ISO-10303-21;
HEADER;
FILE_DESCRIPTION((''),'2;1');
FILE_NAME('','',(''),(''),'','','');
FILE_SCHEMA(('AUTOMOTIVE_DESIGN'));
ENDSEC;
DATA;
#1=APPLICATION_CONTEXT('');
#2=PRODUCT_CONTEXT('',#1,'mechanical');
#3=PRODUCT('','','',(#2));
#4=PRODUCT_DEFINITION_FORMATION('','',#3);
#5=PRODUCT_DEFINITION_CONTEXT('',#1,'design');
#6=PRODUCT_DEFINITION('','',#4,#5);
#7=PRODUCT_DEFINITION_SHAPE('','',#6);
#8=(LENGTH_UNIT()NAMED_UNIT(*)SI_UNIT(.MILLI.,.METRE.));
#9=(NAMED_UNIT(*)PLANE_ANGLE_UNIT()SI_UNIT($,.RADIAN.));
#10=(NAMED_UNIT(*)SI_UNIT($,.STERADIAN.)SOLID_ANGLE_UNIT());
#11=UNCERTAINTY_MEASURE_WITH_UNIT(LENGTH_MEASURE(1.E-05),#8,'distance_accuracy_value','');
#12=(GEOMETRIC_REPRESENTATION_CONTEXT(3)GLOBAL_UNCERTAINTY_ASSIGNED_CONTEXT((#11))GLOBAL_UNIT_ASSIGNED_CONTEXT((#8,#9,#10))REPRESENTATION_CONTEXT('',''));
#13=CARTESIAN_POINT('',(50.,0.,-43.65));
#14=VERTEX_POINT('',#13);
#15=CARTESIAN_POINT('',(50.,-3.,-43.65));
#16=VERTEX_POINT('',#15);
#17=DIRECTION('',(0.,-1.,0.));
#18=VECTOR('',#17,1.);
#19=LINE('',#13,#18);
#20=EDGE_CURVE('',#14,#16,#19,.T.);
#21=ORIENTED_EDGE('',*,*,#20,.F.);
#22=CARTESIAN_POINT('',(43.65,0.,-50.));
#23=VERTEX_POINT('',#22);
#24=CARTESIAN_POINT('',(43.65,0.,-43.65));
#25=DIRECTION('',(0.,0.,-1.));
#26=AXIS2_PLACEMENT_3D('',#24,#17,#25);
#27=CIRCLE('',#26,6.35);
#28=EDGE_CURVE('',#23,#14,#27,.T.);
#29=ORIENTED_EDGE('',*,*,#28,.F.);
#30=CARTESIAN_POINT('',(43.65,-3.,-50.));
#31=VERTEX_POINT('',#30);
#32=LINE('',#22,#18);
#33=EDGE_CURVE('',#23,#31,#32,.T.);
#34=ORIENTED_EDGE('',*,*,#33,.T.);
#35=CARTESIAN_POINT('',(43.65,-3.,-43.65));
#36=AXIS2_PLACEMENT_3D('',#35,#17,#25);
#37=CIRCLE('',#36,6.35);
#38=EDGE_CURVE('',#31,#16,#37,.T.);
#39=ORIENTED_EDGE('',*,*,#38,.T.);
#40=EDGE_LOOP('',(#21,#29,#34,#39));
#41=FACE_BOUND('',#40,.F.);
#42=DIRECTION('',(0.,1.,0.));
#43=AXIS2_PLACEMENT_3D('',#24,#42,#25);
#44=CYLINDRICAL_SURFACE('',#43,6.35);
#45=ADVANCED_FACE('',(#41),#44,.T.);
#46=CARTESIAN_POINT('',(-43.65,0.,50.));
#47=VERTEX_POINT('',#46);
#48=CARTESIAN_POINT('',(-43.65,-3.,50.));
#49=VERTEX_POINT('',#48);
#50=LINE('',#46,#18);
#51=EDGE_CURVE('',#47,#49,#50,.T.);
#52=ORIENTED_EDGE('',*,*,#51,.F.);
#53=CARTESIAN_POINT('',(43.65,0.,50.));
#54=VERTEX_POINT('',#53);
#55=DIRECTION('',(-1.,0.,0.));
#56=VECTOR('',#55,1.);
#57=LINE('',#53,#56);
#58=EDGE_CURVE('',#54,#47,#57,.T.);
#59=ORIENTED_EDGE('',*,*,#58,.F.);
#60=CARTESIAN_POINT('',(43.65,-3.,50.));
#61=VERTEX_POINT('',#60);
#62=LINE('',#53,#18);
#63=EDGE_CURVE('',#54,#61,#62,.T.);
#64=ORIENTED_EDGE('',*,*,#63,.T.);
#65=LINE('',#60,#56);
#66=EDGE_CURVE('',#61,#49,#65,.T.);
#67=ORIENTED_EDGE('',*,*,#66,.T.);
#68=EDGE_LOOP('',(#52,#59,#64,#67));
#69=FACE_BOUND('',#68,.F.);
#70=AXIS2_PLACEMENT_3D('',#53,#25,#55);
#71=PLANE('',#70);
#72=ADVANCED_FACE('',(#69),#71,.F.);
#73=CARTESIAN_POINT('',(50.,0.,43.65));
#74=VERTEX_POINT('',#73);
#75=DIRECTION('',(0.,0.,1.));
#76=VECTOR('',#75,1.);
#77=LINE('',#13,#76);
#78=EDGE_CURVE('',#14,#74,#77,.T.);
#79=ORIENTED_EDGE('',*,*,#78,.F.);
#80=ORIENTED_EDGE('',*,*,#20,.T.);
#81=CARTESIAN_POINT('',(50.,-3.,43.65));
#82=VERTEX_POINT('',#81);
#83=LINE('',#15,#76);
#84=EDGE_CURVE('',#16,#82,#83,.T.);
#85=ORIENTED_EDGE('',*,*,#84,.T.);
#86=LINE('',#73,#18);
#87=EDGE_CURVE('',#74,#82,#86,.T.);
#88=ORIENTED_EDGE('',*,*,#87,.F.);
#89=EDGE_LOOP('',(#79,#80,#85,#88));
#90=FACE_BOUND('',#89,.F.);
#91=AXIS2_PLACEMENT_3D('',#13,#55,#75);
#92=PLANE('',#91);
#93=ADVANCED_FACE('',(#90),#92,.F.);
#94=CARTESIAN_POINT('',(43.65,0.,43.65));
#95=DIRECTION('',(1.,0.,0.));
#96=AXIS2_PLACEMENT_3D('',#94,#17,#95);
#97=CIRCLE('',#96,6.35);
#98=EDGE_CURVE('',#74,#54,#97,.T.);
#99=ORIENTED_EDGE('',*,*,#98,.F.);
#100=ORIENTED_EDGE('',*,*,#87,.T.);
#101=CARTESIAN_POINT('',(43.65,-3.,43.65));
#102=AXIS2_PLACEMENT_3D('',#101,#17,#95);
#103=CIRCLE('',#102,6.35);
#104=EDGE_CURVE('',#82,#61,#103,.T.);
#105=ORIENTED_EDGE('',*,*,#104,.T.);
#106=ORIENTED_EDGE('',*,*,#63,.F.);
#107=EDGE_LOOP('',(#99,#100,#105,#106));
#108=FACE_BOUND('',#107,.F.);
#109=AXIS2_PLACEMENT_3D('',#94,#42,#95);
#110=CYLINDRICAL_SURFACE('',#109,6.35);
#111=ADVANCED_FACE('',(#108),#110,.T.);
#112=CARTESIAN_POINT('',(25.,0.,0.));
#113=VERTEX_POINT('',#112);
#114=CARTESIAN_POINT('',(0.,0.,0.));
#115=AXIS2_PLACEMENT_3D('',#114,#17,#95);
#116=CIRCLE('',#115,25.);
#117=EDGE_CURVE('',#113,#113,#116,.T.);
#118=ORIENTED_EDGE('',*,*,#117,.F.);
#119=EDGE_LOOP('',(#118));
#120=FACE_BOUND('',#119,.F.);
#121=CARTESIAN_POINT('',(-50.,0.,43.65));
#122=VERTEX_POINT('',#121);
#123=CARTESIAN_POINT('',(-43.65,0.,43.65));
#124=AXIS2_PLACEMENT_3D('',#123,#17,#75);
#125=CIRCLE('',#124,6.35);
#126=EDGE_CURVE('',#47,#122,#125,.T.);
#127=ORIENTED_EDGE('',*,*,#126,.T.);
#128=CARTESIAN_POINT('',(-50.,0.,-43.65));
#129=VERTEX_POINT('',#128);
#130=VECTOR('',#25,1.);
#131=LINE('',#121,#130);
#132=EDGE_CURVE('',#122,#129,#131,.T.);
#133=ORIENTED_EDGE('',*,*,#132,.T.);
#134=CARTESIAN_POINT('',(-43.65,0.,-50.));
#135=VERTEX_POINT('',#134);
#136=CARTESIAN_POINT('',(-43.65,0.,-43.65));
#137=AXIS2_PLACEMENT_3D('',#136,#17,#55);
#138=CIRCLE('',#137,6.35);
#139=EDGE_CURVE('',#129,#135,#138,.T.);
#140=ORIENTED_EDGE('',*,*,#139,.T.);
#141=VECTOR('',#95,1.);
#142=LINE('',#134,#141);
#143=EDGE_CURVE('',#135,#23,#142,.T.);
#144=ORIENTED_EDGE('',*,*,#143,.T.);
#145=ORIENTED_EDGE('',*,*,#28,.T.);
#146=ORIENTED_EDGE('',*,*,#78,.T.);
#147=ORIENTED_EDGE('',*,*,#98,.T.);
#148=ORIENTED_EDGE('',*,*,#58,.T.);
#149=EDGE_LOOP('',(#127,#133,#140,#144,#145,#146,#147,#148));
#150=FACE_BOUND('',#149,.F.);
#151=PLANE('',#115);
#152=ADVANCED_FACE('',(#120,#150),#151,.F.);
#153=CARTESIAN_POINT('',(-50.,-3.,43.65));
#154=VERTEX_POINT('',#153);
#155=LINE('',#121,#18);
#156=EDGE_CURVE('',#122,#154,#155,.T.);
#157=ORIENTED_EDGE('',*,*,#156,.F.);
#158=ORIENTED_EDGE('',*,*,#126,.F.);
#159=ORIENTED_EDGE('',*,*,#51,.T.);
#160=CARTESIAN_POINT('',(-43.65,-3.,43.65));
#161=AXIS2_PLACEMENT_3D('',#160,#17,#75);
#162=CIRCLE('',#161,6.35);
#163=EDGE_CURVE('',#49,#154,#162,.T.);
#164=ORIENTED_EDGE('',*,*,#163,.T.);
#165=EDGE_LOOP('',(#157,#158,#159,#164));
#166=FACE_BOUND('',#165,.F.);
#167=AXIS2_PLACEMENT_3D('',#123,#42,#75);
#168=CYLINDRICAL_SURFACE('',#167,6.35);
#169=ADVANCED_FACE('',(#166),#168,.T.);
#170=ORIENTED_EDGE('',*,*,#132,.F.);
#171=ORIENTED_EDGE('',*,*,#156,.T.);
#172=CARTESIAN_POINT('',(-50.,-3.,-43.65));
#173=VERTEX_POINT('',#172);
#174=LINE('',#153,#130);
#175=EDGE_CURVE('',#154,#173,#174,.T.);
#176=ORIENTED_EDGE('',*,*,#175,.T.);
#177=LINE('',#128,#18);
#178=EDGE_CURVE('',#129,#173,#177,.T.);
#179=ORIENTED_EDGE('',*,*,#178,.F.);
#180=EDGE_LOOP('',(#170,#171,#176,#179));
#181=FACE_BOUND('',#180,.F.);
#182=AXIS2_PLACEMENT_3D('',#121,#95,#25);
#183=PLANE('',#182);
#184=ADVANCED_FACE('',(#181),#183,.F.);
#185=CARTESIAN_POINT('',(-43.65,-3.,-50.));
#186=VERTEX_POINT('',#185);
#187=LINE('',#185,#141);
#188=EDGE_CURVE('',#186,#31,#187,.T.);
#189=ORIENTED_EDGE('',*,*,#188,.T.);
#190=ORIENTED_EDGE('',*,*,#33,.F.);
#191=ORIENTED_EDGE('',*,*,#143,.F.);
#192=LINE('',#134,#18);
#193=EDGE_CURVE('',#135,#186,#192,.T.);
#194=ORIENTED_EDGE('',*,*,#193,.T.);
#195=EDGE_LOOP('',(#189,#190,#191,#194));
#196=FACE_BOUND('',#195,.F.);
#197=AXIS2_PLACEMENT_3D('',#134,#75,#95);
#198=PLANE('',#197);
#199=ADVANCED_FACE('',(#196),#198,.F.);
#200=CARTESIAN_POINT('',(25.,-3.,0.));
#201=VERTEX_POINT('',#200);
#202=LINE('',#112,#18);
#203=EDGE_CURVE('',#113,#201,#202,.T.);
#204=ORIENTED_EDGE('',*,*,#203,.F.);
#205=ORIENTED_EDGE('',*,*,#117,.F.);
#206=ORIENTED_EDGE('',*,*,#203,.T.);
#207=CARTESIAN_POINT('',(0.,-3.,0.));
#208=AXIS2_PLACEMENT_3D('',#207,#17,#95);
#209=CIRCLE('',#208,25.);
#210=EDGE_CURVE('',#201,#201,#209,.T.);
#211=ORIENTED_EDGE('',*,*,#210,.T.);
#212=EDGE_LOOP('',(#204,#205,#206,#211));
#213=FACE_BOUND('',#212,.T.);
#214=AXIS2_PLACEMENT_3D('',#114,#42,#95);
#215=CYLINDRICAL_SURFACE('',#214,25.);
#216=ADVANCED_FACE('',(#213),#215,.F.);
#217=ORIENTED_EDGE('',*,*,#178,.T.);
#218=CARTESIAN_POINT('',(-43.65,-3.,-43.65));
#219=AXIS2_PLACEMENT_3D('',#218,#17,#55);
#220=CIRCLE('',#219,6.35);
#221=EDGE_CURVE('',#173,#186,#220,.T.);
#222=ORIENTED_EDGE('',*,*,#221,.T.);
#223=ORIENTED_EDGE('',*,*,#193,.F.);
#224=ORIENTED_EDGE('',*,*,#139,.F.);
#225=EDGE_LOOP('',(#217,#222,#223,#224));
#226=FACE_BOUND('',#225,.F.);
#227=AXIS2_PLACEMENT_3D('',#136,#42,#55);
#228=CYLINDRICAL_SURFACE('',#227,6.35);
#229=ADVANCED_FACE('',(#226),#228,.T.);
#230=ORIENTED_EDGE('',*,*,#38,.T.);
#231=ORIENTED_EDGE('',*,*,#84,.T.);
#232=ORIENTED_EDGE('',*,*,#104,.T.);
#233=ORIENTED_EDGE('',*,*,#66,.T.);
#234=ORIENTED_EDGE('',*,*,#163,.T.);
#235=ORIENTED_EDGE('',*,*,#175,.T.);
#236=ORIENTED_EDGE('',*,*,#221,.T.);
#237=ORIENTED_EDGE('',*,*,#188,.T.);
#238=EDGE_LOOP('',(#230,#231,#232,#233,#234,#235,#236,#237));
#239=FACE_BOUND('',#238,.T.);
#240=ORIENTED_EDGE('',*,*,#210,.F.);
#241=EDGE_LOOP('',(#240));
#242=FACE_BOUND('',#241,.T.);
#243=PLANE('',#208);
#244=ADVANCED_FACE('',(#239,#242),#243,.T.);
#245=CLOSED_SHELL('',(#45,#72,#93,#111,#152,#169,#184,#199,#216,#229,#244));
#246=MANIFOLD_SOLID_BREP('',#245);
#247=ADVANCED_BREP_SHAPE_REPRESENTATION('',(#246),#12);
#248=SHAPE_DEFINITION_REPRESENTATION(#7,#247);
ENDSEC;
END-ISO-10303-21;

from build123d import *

# Parameters (mm, degrees)
F0_R     = 25
F1_DEPTH = 3


# Not quite as in the source:
# - a feature of the source that left no trace in its solid (it failed there, or was rolled back) is left out


with BuildPart() as f1:
    # F0 (on Front) → F1 (new body)
    with BuildSketch(Plane.XZ):
        with BuildLine():
            Line((43.65, 50), (-43.65, 50))
            ThreePointArc((-43.65, 50), (-48.1401280605, 48.1401280605), (-50, 43.65))
            Line((-50, 43.65), (-50, -43.65))
            ThreePointArc((-50, -43.65), (-48.1401280605, -48.1401280605), (-43.65, -50))
            Line((-43.65, -50), (43.65, -50))
            ThreePointArc((43.65, -50), (48.1401280605, -48.1401280605), (50, -43.65))
            Line((50, -43.65), (50, 43.65))
            ThreePointArc((50, 43.65), (48.1401280605, 48.1401280605), (43.65, 50))
        make_face()
        Circle(F0_R, mode=Mode.SUBTRACT)
    extrude(amount=F1_DEPTH)


solid = f1.part
